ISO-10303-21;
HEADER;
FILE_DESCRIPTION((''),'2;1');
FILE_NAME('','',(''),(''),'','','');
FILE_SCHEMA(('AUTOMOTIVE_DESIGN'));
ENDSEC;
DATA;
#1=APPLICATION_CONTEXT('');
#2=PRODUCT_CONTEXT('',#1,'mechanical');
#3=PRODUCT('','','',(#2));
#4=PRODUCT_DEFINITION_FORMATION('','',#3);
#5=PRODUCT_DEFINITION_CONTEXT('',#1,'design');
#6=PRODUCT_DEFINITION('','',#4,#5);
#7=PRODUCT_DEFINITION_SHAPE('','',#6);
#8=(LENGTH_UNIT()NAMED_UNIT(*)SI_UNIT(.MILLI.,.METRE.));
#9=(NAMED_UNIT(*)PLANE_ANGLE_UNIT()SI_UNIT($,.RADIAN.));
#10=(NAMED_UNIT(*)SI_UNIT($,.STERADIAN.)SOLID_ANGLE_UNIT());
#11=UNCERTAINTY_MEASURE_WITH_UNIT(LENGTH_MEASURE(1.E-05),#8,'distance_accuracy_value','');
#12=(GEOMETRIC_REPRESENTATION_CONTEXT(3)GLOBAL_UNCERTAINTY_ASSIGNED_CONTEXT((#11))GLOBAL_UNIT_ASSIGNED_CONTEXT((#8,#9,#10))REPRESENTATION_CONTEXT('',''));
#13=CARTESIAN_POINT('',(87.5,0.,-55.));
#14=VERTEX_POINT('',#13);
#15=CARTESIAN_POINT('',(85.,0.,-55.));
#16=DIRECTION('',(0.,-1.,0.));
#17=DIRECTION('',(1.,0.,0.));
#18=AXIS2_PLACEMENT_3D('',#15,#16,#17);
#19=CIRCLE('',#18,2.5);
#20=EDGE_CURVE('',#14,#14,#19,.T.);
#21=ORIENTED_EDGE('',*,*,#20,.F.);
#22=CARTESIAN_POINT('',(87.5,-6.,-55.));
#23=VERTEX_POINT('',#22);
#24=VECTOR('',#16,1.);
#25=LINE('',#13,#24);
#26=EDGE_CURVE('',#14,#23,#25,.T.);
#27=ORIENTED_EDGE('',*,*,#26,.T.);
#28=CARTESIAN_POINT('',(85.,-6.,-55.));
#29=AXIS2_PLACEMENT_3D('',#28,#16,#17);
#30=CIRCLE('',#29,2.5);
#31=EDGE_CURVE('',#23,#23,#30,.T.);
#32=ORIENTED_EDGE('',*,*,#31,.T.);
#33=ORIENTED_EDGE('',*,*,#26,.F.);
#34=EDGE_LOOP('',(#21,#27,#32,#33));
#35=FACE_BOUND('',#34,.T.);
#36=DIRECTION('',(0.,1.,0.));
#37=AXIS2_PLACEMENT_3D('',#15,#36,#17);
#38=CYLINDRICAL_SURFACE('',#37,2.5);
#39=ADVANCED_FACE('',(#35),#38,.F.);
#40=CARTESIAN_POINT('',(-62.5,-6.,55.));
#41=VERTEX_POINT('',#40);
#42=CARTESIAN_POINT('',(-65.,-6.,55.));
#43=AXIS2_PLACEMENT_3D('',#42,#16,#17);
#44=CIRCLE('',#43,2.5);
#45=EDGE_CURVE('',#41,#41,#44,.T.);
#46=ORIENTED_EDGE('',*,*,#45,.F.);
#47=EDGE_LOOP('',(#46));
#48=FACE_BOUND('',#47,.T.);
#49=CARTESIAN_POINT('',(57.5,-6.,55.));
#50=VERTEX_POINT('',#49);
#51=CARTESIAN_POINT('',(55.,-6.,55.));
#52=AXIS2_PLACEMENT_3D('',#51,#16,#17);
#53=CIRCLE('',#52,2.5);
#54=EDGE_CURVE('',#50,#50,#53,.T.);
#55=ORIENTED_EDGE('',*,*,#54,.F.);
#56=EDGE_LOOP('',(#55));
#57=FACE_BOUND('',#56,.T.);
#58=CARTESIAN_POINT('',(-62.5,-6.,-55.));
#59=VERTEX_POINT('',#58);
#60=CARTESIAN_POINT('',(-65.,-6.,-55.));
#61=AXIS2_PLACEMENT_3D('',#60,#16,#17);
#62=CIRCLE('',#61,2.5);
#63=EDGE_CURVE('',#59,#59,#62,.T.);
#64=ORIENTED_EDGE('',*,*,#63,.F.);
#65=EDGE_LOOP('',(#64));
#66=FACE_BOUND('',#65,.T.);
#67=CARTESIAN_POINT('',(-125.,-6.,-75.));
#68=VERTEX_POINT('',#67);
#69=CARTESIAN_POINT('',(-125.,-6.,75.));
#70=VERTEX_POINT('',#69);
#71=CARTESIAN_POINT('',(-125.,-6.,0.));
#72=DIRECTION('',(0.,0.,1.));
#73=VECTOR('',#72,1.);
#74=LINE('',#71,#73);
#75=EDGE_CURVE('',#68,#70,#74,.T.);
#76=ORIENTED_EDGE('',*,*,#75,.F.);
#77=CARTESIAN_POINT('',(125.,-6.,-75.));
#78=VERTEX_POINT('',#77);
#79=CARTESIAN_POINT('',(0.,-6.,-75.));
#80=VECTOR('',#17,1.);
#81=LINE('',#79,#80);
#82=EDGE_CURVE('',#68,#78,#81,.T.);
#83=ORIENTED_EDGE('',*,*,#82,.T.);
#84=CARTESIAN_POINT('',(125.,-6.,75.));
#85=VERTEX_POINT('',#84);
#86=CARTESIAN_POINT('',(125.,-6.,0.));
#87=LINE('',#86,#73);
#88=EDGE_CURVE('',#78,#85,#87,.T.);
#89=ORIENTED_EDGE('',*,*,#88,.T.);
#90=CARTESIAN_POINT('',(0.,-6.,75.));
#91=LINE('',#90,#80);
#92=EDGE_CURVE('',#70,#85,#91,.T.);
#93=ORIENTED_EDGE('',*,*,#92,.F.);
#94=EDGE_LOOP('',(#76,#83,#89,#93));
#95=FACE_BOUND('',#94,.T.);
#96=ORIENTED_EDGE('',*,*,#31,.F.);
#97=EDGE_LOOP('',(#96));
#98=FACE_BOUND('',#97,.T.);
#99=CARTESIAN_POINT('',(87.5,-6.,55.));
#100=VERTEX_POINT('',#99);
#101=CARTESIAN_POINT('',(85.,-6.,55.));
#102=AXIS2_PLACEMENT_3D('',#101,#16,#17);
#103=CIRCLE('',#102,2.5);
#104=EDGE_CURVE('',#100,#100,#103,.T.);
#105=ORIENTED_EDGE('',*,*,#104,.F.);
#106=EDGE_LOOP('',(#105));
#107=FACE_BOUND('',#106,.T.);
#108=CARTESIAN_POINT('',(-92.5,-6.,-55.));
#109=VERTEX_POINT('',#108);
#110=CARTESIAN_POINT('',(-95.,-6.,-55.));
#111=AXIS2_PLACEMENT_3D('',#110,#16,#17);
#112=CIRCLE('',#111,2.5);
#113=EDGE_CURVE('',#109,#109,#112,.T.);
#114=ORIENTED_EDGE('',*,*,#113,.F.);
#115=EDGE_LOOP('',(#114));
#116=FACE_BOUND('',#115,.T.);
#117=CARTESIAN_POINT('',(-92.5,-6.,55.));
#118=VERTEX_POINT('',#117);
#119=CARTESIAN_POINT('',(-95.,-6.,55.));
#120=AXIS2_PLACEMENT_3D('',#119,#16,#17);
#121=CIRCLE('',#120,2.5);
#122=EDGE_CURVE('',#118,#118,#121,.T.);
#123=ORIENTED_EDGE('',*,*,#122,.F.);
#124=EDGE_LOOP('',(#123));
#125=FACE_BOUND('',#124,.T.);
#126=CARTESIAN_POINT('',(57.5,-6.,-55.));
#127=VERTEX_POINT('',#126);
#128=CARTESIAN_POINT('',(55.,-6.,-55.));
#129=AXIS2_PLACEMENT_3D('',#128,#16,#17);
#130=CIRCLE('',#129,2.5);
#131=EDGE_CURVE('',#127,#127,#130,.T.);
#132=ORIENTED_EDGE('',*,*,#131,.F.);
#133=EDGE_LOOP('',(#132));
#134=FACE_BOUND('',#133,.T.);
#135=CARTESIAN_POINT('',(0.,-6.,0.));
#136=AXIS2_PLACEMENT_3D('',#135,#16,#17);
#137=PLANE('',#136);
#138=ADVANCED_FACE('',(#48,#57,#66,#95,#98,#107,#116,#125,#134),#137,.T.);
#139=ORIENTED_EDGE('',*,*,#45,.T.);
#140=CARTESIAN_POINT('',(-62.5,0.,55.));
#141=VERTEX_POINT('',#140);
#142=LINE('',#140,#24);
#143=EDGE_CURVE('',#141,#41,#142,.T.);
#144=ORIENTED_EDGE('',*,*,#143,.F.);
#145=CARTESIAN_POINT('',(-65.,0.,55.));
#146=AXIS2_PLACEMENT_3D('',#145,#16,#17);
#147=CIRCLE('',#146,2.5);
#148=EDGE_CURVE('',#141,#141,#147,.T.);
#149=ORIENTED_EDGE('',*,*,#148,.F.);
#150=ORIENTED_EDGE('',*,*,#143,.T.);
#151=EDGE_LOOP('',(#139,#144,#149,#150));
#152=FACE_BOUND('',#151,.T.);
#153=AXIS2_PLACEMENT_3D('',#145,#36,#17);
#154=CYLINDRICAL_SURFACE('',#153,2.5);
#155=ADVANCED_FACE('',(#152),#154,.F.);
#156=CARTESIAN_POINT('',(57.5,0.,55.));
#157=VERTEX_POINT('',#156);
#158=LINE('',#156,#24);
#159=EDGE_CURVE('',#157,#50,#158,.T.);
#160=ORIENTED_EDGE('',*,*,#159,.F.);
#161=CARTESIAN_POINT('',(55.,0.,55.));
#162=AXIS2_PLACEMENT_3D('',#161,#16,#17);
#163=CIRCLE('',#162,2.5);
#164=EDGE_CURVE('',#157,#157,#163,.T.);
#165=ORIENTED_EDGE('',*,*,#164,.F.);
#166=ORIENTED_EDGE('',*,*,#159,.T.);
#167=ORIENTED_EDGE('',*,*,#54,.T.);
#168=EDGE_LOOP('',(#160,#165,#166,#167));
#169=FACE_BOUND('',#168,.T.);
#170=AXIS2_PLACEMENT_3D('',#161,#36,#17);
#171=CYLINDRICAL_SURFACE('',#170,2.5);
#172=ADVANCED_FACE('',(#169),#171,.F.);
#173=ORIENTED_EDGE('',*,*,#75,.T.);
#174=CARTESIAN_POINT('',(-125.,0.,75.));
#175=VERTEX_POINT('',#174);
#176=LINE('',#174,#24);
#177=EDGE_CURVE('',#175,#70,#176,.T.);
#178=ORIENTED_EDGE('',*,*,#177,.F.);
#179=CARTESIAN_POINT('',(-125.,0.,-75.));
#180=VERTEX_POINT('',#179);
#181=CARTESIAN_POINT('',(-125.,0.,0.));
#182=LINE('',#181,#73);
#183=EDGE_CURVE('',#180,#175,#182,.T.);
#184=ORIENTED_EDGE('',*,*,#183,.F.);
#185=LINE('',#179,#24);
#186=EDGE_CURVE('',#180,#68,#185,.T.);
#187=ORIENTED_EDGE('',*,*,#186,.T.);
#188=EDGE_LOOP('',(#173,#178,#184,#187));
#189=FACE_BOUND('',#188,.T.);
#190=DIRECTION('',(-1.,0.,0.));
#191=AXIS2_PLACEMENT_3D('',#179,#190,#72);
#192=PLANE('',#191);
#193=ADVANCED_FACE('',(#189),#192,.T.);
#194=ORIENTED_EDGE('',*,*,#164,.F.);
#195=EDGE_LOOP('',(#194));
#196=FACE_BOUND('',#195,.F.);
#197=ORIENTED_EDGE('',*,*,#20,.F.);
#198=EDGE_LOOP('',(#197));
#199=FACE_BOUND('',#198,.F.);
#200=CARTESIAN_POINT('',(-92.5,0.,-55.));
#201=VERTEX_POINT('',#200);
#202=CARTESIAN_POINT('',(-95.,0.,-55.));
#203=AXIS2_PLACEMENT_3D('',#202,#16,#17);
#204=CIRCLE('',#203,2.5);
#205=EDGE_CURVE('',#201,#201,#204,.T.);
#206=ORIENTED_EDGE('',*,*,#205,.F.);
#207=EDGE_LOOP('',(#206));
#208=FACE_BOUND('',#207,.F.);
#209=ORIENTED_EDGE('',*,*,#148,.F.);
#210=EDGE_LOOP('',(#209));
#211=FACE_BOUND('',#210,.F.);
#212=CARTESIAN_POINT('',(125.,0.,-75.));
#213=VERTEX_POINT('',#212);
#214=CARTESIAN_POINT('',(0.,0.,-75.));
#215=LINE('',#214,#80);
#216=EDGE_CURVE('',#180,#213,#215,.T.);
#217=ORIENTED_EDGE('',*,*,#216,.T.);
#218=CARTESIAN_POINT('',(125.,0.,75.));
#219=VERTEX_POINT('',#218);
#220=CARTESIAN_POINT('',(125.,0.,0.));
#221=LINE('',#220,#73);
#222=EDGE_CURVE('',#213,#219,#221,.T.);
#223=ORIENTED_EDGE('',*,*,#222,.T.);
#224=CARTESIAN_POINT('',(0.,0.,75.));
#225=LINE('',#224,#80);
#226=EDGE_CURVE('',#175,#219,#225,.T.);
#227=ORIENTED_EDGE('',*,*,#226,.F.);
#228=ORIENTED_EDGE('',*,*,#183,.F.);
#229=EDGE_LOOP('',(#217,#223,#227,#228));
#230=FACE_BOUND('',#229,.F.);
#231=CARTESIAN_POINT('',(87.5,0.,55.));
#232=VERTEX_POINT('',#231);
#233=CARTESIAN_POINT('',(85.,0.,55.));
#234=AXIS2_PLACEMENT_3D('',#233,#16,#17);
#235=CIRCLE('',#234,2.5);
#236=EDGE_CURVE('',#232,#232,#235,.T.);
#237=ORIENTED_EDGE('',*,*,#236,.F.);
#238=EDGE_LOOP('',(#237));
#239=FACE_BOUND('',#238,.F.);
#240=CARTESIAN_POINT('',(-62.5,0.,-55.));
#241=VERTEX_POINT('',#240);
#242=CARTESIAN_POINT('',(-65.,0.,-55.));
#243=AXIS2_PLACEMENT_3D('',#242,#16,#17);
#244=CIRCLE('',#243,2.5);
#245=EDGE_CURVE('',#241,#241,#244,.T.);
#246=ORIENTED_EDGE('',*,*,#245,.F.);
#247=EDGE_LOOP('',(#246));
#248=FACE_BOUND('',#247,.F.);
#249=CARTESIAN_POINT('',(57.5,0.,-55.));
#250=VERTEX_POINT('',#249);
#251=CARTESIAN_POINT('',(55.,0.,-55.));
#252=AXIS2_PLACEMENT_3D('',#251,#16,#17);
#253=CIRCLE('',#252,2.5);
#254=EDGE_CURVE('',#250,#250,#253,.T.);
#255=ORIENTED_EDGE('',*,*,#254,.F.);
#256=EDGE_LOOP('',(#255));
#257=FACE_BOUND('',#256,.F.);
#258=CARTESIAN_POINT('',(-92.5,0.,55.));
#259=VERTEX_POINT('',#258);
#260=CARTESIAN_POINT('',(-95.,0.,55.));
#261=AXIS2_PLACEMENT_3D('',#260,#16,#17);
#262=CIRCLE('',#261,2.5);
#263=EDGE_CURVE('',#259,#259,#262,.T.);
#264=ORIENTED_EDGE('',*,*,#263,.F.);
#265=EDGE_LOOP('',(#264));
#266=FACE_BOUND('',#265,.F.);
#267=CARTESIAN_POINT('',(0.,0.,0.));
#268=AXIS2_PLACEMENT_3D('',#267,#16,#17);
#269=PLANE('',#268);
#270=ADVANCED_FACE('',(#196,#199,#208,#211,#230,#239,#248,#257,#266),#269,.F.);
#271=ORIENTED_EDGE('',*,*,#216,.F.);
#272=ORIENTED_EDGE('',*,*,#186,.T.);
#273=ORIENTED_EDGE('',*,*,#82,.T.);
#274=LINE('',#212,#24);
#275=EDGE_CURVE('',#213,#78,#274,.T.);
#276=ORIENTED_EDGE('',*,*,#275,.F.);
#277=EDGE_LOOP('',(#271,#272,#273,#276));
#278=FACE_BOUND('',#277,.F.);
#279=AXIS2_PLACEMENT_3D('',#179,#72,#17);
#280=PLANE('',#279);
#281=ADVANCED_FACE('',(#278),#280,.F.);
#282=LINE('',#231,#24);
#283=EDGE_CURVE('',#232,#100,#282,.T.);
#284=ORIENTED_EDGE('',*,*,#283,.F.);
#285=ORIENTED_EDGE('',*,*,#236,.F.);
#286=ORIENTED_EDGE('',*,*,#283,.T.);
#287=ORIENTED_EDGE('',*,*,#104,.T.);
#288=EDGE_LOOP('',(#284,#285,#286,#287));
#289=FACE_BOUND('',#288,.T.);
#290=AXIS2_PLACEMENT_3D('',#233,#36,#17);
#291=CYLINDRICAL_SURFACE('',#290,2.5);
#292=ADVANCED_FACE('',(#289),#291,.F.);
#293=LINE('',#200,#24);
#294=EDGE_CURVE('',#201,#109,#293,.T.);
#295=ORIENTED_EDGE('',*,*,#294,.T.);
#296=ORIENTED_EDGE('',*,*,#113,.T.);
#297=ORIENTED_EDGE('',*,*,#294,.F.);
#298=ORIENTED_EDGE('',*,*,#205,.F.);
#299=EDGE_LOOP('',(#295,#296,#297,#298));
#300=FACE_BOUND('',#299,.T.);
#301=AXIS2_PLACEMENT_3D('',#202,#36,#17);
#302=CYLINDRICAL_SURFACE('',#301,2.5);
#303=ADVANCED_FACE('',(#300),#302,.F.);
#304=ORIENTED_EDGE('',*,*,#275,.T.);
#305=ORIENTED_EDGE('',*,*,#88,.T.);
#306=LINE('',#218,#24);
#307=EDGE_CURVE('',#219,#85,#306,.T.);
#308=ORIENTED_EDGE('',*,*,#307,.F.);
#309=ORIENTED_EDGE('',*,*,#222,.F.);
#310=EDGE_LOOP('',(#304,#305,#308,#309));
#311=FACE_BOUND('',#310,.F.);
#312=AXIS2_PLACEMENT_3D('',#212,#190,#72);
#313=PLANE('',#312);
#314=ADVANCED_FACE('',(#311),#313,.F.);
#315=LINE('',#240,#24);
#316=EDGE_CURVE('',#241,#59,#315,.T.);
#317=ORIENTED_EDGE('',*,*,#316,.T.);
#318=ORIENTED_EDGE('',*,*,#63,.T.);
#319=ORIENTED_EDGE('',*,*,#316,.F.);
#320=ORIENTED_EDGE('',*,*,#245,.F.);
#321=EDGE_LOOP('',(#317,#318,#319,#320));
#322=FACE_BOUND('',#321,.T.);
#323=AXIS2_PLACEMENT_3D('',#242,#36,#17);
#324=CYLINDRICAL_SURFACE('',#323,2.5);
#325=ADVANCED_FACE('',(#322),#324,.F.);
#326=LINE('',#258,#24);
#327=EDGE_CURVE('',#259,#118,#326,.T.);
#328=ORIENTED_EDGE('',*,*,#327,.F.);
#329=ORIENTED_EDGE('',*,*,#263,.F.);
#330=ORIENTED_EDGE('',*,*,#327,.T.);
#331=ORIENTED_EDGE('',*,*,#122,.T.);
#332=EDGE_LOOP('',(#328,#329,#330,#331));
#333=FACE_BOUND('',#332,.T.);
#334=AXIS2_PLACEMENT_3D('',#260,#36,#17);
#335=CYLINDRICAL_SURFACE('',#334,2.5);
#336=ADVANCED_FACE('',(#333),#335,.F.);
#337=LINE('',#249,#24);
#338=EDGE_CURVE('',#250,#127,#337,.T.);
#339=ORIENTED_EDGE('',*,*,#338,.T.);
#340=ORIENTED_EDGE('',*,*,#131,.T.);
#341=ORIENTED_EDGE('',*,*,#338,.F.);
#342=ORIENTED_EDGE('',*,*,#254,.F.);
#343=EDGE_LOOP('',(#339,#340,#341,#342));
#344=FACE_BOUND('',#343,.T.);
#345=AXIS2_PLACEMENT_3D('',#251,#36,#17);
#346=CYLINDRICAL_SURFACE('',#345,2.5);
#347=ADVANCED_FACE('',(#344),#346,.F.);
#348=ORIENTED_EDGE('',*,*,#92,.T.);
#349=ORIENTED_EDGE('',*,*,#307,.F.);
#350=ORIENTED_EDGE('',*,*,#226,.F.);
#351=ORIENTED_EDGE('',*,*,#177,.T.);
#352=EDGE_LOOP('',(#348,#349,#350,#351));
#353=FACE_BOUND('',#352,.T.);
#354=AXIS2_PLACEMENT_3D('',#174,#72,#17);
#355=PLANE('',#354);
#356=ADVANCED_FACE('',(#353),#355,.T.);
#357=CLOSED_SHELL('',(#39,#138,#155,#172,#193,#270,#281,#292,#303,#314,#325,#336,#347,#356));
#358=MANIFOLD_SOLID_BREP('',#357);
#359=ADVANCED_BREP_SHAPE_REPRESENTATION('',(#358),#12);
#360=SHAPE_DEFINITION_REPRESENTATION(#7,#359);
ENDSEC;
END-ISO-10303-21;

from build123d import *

# Parameters (mm, degrees)
F0_W     = 250
F0_H     = 150
F0_R     = 2.5
F1_DEPTH = 6


# Not quite as in the source:
# - a feature names something its author has since deleted; it is built from what else it names


with BuildPart() as f1:
    # F0 (on Front) → F1 (new body)
    with BuildSketch(Plane.XZ):
        Rectangle(F0_W, F0_H)
        with Locations((-95, -55)):
            Circle(F0_R, mode=Mode.SUBTRACT)
        with Locations((-65, -55)):
            Circle(F0_R, mode=Mode.SUBTRACT)
        with Locations((55, -55)):
            Circle(F0_R, mode=Mode.SUBTRACT)
        with Locations((85, -55)):
            Circle(F0_R, mode=Mode.SUBTRACT)
        with Locations((-95, 55)):
            Circle(F0_R, mode=Mode.SUBTRACT)
        with Locations((-65, 55)):
            Circle(F0_R, mode=Mode.SUBTRACT)
        with Locations((55, 55)):
            Circle(F0_R, mode=Mode.SUBTRACT)
        with Locations((85, 55)):
            Circle(F0_R, mode=Mode.SUBTRACT)
    extrude(amount=F1_DEPTH)


solid = f1.part
